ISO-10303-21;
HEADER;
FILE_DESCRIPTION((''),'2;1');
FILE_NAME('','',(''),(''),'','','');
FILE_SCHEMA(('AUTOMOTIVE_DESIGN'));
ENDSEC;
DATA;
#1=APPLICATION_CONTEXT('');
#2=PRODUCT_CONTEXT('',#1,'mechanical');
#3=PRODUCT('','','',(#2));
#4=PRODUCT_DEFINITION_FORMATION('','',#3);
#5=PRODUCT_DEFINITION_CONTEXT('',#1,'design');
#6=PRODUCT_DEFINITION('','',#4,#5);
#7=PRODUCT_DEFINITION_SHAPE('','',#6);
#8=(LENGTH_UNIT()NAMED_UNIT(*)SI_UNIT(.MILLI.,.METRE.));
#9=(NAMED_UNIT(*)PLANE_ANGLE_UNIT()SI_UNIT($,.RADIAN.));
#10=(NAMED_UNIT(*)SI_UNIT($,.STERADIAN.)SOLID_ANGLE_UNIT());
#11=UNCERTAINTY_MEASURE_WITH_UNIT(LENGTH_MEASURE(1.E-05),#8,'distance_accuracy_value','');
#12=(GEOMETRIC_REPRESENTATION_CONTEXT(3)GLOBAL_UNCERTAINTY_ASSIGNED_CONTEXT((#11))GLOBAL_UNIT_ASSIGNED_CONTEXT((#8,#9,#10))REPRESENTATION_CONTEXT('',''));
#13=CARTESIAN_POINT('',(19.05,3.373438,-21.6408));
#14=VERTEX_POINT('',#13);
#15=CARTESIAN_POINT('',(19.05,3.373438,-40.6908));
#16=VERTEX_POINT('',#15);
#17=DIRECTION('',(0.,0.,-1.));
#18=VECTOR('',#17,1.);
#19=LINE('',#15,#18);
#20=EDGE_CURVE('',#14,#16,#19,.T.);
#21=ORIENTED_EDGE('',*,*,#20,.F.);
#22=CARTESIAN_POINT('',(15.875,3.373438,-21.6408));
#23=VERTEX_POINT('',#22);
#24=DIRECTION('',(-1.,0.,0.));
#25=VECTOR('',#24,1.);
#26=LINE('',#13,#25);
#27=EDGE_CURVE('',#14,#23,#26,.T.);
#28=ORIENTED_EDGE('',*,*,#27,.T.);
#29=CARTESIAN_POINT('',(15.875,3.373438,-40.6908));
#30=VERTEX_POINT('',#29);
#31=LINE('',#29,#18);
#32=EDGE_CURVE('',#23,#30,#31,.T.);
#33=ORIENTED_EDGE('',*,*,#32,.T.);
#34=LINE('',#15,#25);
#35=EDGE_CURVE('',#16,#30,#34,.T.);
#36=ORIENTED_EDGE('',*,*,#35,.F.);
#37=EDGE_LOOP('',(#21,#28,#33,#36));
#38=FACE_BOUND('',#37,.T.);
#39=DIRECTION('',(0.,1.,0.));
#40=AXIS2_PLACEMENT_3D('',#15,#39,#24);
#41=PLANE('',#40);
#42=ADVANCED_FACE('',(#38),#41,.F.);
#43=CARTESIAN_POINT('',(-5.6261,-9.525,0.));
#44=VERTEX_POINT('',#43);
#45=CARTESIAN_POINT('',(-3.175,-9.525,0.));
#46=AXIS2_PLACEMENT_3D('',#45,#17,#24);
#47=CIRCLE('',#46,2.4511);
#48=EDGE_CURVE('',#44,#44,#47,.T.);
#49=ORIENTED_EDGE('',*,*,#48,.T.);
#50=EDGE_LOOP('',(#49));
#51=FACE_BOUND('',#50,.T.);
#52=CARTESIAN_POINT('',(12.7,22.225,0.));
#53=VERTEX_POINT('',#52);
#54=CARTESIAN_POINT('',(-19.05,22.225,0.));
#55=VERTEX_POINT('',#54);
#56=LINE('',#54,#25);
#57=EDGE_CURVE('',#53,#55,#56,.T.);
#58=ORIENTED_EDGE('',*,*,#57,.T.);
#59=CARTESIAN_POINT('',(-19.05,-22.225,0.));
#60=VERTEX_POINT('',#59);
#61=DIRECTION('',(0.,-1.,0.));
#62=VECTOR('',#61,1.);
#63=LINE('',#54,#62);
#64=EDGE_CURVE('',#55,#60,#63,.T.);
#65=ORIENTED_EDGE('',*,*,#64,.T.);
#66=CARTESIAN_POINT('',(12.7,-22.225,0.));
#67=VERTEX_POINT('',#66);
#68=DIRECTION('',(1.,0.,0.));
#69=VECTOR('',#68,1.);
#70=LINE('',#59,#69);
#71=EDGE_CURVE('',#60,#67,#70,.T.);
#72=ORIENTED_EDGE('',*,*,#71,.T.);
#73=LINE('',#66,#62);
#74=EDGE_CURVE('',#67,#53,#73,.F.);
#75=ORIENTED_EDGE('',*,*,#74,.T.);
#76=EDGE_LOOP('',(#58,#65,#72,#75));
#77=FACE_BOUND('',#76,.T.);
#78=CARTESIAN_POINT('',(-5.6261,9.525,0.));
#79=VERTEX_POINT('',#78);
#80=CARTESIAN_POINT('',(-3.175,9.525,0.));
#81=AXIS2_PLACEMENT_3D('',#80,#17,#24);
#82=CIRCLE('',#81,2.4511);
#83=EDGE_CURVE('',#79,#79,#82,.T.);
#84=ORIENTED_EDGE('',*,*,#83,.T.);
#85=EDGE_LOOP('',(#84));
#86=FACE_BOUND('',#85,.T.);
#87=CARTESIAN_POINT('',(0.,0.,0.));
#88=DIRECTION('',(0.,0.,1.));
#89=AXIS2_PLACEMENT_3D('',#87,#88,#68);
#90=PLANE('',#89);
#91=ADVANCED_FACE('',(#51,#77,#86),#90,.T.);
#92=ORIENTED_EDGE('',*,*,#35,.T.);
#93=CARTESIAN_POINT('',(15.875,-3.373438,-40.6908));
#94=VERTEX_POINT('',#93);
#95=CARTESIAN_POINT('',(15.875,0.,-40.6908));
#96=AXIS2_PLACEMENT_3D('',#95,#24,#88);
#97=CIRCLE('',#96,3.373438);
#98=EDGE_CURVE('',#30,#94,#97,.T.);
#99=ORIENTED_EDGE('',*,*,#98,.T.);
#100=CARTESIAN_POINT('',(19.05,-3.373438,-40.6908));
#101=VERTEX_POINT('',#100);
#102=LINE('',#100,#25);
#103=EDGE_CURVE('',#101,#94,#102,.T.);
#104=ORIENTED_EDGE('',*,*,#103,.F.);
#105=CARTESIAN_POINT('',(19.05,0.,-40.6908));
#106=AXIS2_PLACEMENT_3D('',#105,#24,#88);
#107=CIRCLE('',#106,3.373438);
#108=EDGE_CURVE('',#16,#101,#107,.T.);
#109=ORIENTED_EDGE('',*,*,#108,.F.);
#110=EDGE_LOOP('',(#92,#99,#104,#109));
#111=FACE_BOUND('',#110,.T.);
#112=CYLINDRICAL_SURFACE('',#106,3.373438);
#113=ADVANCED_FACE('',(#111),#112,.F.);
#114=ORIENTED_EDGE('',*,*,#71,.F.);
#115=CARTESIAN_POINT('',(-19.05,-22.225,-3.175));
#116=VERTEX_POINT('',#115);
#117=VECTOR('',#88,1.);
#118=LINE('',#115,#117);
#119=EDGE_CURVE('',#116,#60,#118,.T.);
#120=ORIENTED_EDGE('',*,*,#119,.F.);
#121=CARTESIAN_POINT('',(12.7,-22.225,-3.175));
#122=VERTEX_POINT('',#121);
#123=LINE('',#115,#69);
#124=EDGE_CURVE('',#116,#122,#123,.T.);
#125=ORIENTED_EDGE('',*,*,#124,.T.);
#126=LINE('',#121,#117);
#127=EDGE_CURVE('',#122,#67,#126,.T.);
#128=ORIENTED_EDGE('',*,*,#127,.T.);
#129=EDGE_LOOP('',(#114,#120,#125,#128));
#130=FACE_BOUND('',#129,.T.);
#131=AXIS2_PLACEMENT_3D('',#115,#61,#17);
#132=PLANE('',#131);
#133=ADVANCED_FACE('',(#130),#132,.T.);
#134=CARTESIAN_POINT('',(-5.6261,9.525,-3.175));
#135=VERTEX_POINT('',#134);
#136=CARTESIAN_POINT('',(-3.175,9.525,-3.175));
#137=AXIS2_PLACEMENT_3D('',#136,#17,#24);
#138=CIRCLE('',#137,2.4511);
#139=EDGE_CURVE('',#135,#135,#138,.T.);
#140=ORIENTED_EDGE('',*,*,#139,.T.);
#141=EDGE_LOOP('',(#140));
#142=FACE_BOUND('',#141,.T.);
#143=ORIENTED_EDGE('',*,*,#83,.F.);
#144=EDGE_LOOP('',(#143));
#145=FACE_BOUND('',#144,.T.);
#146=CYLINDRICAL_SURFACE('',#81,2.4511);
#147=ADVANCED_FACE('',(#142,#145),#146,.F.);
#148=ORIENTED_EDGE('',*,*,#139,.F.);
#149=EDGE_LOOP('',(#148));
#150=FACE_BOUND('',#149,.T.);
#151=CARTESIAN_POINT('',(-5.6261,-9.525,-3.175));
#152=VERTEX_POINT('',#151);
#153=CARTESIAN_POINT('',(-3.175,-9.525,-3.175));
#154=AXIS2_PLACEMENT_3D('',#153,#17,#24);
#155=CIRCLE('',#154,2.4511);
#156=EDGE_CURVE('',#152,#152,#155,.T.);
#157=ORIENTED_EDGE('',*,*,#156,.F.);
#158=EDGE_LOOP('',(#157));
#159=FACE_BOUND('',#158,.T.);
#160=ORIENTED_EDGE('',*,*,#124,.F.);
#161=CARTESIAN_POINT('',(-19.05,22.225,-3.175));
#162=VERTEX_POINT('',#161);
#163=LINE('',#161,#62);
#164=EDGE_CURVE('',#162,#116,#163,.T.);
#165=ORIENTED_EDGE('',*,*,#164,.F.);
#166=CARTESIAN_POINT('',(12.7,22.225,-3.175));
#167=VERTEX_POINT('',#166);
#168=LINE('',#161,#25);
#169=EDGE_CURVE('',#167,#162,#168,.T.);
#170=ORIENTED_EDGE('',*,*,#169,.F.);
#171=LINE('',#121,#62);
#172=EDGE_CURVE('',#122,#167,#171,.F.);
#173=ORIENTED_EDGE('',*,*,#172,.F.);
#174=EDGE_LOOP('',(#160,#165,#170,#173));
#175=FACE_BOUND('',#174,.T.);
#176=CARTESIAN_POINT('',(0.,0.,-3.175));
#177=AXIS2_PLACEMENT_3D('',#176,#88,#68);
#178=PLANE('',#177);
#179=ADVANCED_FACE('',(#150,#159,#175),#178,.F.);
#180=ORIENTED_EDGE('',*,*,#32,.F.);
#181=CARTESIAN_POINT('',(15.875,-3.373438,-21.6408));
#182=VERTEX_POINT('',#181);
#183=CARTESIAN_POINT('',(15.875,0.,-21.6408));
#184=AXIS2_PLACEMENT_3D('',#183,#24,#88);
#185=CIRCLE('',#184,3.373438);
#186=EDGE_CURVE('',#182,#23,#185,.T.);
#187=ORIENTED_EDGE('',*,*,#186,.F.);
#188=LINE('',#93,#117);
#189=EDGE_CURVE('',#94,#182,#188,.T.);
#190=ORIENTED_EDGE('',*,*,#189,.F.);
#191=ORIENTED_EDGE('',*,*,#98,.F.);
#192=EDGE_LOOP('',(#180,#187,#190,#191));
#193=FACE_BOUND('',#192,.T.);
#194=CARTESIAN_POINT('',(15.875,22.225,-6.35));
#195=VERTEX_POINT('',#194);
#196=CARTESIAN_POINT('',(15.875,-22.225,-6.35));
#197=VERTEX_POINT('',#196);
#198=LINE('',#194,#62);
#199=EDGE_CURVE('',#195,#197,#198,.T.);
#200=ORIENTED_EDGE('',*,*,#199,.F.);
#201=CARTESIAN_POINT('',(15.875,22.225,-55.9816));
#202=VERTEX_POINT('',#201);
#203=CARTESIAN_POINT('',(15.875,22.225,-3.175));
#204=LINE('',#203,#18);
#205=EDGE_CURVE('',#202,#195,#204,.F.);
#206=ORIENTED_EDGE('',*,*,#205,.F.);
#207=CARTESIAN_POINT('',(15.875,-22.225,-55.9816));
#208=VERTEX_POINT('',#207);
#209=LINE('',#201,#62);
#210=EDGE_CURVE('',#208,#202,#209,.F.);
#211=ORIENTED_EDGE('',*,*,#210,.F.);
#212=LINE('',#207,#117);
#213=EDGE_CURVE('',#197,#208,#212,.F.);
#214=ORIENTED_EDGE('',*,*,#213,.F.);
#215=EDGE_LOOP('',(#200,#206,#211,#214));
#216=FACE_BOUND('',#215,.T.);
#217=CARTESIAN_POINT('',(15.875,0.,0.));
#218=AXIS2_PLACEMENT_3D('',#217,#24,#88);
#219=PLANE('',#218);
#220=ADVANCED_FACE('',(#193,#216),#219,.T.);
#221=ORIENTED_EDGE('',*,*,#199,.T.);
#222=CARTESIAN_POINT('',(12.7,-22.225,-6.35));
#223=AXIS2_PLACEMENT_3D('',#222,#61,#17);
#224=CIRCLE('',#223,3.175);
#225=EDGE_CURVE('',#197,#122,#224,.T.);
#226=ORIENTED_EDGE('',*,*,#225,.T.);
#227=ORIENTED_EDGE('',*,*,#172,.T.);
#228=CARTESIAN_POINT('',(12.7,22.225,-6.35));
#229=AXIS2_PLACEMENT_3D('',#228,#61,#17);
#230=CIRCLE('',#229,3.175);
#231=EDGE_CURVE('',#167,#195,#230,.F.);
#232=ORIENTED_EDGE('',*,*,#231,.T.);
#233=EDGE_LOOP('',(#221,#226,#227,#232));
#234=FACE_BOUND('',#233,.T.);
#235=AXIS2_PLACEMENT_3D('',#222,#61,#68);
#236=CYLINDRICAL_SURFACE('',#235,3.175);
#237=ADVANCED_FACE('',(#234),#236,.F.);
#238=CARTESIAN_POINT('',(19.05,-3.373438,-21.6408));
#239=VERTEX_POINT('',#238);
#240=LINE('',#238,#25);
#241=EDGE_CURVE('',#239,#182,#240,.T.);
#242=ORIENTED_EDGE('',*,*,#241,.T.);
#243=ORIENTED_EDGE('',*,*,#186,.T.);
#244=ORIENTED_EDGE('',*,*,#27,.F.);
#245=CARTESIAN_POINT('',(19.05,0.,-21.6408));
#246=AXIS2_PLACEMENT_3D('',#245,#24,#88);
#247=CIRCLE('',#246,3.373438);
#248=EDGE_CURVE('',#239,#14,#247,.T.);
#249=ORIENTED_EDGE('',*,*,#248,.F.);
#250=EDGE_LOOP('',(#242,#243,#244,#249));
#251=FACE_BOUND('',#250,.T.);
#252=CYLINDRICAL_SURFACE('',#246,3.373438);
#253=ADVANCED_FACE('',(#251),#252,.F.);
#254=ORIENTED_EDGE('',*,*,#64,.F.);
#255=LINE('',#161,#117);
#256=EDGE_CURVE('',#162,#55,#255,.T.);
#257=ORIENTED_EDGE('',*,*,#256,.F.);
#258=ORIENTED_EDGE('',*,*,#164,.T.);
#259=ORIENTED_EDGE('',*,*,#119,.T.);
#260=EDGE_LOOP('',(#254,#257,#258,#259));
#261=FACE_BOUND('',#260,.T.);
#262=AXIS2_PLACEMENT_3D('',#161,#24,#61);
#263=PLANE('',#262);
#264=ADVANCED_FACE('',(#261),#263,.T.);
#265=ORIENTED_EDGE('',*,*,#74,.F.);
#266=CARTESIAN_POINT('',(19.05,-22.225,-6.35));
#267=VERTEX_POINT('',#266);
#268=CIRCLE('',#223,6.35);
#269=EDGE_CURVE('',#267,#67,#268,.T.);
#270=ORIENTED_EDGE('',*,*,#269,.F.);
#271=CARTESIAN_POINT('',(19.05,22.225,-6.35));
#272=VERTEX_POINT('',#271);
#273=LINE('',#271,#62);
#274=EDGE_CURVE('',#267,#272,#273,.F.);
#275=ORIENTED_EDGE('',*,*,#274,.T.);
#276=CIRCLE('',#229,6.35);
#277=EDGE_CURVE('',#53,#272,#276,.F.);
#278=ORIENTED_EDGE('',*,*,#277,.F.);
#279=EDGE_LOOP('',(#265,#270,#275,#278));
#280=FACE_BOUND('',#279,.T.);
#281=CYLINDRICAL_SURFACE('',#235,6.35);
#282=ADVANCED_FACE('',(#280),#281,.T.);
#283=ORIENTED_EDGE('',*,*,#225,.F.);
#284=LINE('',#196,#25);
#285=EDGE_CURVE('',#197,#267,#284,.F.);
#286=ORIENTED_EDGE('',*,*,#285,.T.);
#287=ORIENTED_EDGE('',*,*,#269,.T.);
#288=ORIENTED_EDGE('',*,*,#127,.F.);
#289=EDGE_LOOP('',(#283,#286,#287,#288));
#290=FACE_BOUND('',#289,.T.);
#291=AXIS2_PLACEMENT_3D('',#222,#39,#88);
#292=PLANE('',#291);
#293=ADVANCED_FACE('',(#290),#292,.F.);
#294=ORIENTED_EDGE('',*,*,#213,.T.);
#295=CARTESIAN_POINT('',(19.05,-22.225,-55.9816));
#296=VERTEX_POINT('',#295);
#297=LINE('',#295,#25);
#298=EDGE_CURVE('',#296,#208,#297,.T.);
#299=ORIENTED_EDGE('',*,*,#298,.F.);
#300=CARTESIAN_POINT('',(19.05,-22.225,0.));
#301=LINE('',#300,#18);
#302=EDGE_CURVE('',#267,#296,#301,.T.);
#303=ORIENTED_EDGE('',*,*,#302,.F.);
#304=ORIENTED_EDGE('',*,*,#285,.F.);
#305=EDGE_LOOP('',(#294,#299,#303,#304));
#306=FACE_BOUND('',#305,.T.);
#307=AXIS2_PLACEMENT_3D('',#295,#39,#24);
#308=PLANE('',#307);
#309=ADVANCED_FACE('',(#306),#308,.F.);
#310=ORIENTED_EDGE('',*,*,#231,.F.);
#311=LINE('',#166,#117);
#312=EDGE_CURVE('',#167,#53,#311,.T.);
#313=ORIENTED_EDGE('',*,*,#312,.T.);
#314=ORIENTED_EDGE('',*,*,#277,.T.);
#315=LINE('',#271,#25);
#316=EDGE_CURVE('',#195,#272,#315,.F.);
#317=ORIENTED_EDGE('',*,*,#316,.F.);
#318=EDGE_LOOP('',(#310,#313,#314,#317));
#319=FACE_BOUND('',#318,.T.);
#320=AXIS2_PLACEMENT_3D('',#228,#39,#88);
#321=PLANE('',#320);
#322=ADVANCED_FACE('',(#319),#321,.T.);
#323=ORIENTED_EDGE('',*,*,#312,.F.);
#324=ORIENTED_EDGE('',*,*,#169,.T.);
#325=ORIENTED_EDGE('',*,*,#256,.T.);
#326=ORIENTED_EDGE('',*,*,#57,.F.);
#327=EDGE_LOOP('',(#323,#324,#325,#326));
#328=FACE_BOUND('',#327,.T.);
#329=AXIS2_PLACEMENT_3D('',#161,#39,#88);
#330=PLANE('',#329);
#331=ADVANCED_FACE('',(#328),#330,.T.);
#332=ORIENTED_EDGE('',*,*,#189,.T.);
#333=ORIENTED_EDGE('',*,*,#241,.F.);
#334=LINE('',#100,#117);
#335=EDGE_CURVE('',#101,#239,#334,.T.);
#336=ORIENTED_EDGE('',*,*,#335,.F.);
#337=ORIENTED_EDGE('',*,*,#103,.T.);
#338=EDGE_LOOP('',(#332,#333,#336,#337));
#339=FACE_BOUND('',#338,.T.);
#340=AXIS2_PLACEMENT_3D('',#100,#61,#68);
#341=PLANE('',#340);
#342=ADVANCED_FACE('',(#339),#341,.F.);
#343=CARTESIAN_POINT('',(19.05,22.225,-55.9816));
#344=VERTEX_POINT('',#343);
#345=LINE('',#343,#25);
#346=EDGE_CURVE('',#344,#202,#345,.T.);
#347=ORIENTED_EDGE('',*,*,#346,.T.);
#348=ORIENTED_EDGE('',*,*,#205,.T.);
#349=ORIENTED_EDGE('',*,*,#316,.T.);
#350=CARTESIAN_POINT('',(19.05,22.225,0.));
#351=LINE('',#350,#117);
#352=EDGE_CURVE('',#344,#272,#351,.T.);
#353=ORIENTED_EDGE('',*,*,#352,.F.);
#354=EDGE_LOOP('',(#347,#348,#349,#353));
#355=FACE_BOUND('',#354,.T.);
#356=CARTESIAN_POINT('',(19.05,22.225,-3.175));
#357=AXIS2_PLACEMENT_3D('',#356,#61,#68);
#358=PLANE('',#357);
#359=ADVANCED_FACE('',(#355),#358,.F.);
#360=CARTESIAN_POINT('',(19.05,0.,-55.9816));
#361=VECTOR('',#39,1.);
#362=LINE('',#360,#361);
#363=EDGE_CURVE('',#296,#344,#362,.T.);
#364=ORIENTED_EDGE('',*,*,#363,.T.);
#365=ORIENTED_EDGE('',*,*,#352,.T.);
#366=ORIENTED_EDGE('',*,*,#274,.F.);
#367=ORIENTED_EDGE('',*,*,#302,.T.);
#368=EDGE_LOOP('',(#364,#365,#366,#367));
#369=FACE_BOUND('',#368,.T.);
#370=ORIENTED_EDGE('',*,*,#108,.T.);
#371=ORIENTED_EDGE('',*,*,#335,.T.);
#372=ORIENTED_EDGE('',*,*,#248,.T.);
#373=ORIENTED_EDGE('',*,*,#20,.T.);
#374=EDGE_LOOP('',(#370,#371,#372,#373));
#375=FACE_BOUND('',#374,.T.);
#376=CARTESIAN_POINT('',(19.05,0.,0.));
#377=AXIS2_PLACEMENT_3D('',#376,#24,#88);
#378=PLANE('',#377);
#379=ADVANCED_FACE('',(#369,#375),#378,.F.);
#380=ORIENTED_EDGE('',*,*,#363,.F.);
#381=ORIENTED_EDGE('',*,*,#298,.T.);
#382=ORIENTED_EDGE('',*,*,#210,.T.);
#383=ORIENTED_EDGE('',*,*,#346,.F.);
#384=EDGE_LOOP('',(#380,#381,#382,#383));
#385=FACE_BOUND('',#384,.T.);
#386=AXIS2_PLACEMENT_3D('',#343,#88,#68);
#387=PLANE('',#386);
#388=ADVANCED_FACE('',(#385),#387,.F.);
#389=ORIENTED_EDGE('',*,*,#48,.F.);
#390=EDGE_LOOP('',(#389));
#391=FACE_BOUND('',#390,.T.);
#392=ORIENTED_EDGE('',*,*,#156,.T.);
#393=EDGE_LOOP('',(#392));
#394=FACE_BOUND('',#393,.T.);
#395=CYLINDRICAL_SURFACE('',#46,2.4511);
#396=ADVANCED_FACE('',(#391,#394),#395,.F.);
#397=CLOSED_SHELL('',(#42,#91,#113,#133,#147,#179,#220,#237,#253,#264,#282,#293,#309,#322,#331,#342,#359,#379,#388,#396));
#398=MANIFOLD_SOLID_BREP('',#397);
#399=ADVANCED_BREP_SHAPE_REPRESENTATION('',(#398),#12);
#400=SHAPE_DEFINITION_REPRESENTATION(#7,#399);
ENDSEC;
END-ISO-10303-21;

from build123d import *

# Parameters (mm, degrees)
SKETCH1_W                    = 38.1
SKETCH1_H                    = 44.45
BASE_FLANGE1_DEPTH           = 3.175
EDGE_FLANGE1_STRIP_W         = 19.05
EDGE_FLANGE1_STRIP_H         = 3.175
EDGE_FLANGE1_STRIP_CUT_DEPTH = 44.45
EDGE_FLANGE1_DEPTH           = 44.45
SKETCH9_R                    = 2.4511
CUT_EXTRUDE1_DEPTH           = 61.377066247
CUT_EXTRUDE3_DEPTH           = 70.625037081


# Sheet-metal steps are written as plain solids
with BuildPart() as part:
    # Sketch1 → Base-Flange1 (new body)
    with BuildSketch(Plane.XY):
        Rectangle(SKETCH1_W, SKETCH1_H)
    extrude(amount=-BASE_FLANGE1_DEPTH)

    # Edge-Flange1 strip (across the edge) → Edge-Flange1 strip cut (cut)
    with BuildSketch(Plane(origin=(19.05, 22.225, -3.175), x_dir=(-1, 0, 0), z_dir=(0, -1, 0))):
        with Locations((-3.175, -1.5875)):
            Rectangle(EDGE_FLANGE1_STRIP_W, EDGE_FLANGE1_STRIP_H)
    extrude(amount=EDGE_FLANGE1_STRIP_CUT_DEPTH, mode=Mode.SUBTRACT)

    # Edge-Flange1 section (across the edge) → Edge-Flange1 (add)
    with BuildSketch(Plane(origin=(19.05, 22.225, -3.175), x_dir=(-1, 0, 0), z_dir=(0, -1, 0))):
        with BuildLine():
            Line((0, 3.175), (0, 52.8066))
            Line((0, 52.8066), (3.175, 52.8066))
            Line((3.175, 52.8066), (3.175, 3.175))
            ThreePointArc((3.175, 3.175), (4.10493597, 0.92993597), (6.35, 0))
            Line((6.35, 0), (6.35, -3.175))
            ThreePointArc((6.35, -3.175), (1.859871939, -1.315128061), (0, 3.175))
        make_face()
    extrude(amount=EDGE_FLANGE1_DEPTH)

    # Sketch9 → Cut-Extrude1 (cut, through all)
    with BuildSketch(Plane(origin=(0, 0, -3.175), x_dir=(-1, 0, 0), z_dir=(0, 0, -1))):
        with Locations((3.175, 9.525)):
            Circle(SKETCH9_R)
        with Locations((3.175, -9.525)):
            Circle(SKETCH9_R)
    extrude(amount=-CUT_EXTRUDE1_DEPTH, mode=Mode.SUBTRACT)

    # Sketch12 → Cut-Extrude3 (cut, through all)
    with BuildSketch(Plane.ZY.offset(-15.875)):
        with BuildLine():
            Line((-40.6908, 3.3734375), (-21.6408, 3.3734375))
            ThreePointArc((-21.6408, 3.3734375), (-18.2673625, 0), (-21.6408, -3.3734375))
            Line((-21.6408, -3.3734375), (-40.6908, -3.3734375))
            ThreePointArc((-40.6908, -3.3734375), (-44.0642375, 0), (-40.6908, 3.3734375))
        make_face()
    extrude(amount=-CUT_EXTRUDE3_DEPTH, mode=Mode.SUBTRACT)


solid = part.part
